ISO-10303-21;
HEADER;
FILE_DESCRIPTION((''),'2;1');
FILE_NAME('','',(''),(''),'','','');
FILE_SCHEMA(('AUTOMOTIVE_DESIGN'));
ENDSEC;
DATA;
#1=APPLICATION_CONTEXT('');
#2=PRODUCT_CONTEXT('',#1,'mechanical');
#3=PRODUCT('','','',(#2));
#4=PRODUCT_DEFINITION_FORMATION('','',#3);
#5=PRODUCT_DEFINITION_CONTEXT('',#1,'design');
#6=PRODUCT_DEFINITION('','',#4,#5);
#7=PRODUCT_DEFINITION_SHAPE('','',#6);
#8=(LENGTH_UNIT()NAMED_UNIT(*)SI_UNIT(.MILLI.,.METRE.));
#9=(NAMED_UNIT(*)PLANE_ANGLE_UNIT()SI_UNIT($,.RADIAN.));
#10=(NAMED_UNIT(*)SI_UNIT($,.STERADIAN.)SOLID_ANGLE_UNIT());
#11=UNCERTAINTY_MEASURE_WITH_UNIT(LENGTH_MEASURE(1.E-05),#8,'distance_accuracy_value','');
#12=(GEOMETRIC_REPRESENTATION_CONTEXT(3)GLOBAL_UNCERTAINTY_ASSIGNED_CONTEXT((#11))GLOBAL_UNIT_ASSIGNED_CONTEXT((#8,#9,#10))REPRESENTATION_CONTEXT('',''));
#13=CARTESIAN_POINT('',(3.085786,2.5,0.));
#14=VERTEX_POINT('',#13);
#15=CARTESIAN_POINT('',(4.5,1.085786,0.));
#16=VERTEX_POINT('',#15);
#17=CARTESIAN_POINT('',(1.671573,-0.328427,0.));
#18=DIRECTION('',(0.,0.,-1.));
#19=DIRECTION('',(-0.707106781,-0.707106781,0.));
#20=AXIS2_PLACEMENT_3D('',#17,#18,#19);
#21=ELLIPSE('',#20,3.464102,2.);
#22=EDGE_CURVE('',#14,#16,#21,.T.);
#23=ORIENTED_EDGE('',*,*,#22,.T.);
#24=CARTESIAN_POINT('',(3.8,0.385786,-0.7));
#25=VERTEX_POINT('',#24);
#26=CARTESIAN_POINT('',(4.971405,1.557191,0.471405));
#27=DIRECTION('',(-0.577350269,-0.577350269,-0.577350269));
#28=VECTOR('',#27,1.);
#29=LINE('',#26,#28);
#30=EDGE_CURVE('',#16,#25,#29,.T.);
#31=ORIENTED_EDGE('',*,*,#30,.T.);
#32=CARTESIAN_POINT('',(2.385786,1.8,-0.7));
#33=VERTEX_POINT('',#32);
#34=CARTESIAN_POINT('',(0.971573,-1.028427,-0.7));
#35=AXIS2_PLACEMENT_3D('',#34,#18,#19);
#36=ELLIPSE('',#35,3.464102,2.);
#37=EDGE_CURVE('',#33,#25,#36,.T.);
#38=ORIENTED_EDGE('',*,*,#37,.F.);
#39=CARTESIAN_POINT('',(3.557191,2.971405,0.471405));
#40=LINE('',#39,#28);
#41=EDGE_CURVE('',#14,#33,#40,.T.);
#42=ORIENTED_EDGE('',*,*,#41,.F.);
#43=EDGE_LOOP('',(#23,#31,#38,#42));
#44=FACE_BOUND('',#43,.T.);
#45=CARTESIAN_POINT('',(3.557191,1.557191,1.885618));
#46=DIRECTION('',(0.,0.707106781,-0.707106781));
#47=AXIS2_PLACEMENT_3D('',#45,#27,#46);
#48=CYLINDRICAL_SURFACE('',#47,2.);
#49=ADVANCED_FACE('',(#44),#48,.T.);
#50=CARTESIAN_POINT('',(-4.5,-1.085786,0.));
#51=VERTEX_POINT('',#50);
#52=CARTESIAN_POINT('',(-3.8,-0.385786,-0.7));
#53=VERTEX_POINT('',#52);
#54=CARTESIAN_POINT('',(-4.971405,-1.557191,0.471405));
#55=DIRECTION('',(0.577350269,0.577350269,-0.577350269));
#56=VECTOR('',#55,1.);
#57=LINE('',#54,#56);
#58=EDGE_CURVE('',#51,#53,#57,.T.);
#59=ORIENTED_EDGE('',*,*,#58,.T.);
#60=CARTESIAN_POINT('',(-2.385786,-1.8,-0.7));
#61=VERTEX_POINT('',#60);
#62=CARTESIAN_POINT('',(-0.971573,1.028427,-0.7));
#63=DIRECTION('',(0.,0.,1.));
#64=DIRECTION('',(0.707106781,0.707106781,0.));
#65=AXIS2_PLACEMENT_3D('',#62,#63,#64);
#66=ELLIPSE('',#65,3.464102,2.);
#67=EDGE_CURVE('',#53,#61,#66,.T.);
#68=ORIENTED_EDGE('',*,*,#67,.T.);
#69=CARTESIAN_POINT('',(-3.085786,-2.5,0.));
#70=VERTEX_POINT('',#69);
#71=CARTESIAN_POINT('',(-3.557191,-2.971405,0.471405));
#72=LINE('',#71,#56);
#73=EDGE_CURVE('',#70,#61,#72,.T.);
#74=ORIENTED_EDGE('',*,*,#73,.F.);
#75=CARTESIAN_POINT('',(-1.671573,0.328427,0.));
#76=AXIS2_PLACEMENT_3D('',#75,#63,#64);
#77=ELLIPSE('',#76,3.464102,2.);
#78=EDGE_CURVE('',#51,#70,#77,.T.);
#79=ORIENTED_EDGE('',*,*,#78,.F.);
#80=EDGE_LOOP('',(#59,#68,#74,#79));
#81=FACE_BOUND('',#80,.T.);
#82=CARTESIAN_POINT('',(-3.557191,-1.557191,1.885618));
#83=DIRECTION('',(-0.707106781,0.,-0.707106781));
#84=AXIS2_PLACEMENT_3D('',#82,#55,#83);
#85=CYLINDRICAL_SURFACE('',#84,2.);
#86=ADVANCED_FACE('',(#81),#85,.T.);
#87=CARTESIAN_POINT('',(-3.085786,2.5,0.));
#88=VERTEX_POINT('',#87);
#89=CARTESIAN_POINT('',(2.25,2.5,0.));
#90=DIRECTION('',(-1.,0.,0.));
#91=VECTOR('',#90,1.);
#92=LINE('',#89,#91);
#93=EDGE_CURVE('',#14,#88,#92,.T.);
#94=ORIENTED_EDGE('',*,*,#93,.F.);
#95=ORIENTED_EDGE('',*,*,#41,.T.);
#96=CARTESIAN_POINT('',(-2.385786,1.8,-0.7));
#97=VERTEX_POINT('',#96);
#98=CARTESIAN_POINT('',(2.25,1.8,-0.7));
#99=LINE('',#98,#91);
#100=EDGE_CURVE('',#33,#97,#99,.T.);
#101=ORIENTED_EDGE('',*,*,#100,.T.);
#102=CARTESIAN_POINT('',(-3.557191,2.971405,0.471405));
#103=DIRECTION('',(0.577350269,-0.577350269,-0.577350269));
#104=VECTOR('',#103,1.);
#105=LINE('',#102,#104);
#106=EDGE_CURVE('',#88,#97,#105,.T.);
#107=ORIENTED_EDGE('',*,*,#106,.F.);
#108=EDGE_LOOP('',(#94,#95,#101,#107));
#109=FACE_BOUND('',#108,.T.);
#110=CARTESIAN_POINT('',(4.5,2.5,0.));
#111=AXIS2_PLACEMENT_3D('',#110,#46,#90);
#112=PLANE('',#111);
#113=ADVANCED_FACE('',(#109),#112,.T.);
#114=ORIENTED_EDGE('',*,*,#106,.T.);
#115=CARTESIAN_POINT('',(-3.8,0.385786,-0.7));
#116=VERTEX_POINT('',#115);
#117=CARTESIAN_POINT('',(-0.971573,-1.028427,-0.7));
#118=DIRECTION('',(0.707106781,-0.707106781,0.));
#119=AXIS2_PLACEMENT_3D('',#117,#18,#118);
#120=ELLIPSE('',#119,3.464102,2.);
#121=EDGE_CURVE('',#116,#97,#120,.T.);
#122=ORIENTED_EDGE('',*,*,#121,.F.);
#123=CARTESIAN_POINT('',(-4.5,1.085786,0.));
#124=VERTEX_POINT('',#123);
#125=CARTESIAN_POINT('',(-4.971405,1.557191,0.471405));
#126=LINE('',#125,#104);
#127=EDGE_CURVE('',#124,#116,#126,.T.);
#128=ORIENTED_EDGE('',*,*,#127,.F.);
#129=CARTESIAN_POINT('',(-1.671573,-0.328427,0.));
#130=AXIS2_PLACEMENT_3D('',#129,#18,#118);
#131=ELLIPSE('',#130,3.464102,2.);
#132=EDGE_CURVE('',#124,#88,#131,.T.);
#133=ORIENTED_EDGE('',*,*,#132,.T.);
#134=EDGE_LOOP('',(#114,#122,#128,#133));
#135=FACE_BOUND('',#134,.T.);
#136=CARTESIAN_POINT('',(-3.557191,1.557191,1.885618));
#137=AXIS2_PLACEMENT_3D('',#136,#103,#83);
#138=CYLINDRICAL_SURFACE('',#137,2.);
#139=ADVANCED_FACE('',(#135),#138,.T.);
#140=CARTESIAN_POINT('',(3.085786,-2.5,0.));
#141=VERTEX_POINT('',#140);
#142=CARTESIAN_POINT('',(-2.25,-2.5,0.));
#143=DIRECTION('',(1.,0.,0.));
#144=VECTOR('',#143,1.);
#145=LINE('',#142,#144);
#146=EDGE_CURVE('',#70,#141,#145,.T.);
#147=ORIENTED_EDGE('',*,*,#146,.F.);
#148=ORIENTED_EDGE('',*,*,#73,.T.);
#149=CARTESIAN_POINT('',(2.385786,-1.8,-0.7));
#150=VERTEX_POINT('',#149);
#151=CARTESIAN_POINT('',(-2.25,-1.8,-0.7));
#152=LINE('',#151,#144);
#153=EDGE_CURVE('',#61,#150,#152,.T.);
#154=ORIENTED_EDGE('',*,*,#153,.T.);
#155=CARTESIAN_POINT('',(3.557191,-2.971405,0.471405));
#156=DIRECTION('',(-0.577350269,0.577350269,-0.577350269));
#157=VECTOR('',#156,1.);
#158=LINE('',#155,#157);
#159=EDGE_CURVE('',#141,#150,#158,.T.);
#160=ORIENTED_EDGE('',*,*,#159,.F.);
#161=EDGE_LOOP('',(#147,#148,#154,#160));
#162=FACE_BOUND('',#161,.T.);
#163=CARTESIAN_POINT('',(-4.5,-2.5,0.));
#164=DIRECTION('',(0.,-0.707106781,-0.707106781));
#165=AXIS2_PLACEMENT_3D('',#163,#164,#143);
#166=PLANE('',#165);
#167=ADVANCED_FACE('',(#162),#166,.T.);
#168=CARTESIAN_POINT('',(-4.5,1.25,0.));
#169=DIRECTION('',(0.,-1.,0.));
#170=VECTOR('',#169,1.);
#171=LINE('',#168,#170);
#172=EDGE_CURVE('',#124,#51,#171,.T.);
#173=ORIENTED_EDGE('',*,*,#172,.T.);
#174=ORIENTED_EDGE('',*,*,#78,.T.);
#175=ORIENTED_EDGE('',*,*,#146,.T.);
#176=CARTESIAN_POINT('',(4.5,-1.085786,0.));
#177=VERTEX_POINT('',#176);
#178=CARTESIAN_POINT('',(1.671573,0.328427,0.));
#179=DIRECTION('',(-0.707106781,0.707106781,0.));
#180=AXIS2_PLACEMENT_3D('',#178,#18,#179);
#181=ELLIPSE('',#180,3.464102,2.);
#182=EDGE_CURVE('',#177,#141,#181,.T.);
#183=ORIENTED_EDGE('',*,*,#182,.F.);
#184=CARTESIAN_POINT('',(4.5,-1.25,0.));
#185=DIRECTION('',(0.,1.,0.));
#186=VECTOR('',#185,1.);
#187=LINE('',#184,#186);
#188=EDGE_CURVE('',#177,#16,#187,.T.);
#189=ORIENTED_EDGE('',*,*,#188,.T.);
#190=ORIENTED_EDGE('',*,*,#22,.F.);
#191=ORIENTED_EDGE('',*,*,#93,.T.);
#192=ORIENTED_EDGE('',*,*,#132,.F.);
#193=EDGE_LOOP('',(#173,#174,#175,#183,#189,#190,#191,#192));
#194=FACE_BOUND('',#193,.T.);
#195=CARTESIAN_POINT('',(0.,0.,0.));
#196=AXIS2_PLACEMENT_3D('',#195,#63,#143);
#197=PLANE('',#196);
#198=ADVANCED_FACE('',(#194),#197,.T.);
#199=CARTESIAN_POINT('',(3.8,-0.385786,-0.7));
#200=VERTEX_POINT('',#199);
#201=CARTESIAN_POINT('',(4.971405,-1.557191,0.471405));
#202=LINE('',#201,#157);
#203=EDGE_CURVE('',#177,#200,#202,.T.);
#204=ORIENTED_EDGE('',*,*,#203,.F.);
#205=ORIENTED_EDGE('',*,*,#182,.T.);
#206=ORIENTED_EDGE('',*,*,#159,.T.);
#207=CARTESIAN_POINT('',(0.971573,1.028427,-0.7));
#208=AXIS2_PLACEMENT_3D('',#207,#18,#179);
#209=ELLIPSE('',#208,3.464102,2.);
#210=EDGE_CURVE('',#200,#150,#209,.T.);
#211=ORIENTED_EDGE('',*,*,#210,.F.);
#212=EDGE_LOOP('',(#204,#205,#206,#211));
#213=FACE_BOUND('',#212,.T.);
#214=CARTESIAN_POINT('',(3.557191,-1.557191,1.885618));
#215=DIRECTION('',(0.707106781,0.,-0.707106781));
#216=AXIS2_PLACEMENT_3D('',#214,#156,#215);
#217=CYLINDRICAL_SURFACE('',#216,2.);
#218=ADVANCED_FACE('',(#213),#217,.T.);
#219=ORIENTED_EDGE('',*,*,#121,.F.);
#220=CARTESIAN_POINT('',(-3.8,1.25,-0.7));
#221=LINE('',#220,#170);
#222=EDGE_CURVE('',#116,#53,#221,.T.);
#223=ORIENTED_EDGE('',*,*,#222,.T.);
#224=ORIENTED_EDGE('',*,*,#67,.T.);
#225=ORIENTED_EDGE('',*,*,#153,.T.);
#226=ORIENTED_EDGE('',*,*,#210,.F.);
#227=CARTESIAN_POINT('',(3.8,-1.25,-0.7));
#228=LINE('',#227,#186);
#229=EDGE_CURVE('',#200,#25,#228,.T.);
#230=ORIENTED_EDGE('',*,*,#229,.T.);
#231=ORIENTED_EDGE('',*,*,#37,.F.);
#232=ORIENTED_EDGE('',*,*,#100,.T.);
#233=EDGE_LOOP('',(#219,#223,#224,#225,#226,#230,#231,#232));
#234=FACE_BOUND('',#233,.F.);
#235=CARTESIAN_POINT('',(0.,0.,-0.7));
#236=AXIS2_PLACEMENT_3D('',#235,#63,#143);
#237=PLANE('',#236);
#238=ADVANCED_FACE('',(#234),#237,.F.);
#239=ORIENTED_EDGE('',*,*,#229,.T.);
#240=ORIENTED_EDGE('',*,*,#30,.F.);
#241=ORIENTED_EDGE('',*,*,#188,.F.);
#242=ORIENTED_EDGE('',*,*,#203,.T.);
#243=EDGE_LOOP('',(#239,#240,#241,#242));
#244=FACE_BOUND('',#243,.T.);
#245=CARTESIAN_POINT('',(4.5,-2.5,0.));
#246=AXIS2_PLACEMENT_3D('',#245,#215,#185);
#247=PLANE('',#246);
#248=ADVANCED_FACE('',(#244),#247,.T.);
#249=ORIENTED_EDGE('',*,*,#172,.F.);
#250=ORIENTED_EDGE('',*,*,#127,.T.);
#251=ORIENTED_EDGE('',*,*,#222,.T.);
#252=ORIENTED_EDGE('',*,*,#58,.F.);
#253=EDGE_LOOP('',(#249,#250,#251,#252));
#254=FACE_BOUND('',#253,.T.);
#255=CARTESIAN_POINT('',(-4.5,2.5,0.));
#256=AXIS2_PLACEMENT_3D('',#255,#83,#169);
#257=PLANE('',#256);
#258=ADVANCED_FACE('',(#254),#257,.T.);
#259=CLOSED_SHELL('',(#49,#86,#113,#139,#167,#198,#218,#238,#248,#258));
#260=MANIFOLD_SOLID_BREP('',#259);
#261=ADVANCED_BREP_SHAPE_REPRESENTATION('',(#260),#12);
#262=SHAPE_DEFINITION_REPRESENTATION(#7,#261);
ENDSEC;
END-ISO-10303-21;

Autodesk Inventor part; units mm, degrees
ref_plane "YZ Plane" through (0, 0, 0) normal (1, 0, 0) x (0, 1, 0)
ref_plane "XZ Plane" through (0, 0, 0) normal (0, 1, 0) x (-1, 0, 0)
ref_plane "XY Plane" through (0, 0, 0) normal (0, 0, 1) x (1, 0, 0)
sketch "Sketch1" plane through (0, 0, 0) normal (0, 0, 1) x (1, 0, 0)
  line L0 (-4.5, -2.5) -> (4.5, -2.5)
  line L1 (4.5, -2.5) -> (4.5, 2.5)
  line L2 (4.5, 2.5) -> (-4.5, 2.5)
  line L3 (-4.5, 2.5) -> (-4.5, -2.5)
  line L4 (-4.5, -2.5) -> (4.5, 2.5) construction
  line L5 (4.5, -2.5) -> (-4.5, 2.5) construction
  point P0 (0, 0)
  dimension "d0" = 9
  dimension "d1" = 5
extrude "Extrusion1" add sketch "Sketch1" against normal blind 0.7 draft -45
fillet "Fillet1" radius 2 4 edges at (-4.15, -2.15, -0.35) (-4.15, 2.15, -0.35) (4.15, -2.15, -0.35) (4.15, 2.15, -0.35)
properties part number "Base"
